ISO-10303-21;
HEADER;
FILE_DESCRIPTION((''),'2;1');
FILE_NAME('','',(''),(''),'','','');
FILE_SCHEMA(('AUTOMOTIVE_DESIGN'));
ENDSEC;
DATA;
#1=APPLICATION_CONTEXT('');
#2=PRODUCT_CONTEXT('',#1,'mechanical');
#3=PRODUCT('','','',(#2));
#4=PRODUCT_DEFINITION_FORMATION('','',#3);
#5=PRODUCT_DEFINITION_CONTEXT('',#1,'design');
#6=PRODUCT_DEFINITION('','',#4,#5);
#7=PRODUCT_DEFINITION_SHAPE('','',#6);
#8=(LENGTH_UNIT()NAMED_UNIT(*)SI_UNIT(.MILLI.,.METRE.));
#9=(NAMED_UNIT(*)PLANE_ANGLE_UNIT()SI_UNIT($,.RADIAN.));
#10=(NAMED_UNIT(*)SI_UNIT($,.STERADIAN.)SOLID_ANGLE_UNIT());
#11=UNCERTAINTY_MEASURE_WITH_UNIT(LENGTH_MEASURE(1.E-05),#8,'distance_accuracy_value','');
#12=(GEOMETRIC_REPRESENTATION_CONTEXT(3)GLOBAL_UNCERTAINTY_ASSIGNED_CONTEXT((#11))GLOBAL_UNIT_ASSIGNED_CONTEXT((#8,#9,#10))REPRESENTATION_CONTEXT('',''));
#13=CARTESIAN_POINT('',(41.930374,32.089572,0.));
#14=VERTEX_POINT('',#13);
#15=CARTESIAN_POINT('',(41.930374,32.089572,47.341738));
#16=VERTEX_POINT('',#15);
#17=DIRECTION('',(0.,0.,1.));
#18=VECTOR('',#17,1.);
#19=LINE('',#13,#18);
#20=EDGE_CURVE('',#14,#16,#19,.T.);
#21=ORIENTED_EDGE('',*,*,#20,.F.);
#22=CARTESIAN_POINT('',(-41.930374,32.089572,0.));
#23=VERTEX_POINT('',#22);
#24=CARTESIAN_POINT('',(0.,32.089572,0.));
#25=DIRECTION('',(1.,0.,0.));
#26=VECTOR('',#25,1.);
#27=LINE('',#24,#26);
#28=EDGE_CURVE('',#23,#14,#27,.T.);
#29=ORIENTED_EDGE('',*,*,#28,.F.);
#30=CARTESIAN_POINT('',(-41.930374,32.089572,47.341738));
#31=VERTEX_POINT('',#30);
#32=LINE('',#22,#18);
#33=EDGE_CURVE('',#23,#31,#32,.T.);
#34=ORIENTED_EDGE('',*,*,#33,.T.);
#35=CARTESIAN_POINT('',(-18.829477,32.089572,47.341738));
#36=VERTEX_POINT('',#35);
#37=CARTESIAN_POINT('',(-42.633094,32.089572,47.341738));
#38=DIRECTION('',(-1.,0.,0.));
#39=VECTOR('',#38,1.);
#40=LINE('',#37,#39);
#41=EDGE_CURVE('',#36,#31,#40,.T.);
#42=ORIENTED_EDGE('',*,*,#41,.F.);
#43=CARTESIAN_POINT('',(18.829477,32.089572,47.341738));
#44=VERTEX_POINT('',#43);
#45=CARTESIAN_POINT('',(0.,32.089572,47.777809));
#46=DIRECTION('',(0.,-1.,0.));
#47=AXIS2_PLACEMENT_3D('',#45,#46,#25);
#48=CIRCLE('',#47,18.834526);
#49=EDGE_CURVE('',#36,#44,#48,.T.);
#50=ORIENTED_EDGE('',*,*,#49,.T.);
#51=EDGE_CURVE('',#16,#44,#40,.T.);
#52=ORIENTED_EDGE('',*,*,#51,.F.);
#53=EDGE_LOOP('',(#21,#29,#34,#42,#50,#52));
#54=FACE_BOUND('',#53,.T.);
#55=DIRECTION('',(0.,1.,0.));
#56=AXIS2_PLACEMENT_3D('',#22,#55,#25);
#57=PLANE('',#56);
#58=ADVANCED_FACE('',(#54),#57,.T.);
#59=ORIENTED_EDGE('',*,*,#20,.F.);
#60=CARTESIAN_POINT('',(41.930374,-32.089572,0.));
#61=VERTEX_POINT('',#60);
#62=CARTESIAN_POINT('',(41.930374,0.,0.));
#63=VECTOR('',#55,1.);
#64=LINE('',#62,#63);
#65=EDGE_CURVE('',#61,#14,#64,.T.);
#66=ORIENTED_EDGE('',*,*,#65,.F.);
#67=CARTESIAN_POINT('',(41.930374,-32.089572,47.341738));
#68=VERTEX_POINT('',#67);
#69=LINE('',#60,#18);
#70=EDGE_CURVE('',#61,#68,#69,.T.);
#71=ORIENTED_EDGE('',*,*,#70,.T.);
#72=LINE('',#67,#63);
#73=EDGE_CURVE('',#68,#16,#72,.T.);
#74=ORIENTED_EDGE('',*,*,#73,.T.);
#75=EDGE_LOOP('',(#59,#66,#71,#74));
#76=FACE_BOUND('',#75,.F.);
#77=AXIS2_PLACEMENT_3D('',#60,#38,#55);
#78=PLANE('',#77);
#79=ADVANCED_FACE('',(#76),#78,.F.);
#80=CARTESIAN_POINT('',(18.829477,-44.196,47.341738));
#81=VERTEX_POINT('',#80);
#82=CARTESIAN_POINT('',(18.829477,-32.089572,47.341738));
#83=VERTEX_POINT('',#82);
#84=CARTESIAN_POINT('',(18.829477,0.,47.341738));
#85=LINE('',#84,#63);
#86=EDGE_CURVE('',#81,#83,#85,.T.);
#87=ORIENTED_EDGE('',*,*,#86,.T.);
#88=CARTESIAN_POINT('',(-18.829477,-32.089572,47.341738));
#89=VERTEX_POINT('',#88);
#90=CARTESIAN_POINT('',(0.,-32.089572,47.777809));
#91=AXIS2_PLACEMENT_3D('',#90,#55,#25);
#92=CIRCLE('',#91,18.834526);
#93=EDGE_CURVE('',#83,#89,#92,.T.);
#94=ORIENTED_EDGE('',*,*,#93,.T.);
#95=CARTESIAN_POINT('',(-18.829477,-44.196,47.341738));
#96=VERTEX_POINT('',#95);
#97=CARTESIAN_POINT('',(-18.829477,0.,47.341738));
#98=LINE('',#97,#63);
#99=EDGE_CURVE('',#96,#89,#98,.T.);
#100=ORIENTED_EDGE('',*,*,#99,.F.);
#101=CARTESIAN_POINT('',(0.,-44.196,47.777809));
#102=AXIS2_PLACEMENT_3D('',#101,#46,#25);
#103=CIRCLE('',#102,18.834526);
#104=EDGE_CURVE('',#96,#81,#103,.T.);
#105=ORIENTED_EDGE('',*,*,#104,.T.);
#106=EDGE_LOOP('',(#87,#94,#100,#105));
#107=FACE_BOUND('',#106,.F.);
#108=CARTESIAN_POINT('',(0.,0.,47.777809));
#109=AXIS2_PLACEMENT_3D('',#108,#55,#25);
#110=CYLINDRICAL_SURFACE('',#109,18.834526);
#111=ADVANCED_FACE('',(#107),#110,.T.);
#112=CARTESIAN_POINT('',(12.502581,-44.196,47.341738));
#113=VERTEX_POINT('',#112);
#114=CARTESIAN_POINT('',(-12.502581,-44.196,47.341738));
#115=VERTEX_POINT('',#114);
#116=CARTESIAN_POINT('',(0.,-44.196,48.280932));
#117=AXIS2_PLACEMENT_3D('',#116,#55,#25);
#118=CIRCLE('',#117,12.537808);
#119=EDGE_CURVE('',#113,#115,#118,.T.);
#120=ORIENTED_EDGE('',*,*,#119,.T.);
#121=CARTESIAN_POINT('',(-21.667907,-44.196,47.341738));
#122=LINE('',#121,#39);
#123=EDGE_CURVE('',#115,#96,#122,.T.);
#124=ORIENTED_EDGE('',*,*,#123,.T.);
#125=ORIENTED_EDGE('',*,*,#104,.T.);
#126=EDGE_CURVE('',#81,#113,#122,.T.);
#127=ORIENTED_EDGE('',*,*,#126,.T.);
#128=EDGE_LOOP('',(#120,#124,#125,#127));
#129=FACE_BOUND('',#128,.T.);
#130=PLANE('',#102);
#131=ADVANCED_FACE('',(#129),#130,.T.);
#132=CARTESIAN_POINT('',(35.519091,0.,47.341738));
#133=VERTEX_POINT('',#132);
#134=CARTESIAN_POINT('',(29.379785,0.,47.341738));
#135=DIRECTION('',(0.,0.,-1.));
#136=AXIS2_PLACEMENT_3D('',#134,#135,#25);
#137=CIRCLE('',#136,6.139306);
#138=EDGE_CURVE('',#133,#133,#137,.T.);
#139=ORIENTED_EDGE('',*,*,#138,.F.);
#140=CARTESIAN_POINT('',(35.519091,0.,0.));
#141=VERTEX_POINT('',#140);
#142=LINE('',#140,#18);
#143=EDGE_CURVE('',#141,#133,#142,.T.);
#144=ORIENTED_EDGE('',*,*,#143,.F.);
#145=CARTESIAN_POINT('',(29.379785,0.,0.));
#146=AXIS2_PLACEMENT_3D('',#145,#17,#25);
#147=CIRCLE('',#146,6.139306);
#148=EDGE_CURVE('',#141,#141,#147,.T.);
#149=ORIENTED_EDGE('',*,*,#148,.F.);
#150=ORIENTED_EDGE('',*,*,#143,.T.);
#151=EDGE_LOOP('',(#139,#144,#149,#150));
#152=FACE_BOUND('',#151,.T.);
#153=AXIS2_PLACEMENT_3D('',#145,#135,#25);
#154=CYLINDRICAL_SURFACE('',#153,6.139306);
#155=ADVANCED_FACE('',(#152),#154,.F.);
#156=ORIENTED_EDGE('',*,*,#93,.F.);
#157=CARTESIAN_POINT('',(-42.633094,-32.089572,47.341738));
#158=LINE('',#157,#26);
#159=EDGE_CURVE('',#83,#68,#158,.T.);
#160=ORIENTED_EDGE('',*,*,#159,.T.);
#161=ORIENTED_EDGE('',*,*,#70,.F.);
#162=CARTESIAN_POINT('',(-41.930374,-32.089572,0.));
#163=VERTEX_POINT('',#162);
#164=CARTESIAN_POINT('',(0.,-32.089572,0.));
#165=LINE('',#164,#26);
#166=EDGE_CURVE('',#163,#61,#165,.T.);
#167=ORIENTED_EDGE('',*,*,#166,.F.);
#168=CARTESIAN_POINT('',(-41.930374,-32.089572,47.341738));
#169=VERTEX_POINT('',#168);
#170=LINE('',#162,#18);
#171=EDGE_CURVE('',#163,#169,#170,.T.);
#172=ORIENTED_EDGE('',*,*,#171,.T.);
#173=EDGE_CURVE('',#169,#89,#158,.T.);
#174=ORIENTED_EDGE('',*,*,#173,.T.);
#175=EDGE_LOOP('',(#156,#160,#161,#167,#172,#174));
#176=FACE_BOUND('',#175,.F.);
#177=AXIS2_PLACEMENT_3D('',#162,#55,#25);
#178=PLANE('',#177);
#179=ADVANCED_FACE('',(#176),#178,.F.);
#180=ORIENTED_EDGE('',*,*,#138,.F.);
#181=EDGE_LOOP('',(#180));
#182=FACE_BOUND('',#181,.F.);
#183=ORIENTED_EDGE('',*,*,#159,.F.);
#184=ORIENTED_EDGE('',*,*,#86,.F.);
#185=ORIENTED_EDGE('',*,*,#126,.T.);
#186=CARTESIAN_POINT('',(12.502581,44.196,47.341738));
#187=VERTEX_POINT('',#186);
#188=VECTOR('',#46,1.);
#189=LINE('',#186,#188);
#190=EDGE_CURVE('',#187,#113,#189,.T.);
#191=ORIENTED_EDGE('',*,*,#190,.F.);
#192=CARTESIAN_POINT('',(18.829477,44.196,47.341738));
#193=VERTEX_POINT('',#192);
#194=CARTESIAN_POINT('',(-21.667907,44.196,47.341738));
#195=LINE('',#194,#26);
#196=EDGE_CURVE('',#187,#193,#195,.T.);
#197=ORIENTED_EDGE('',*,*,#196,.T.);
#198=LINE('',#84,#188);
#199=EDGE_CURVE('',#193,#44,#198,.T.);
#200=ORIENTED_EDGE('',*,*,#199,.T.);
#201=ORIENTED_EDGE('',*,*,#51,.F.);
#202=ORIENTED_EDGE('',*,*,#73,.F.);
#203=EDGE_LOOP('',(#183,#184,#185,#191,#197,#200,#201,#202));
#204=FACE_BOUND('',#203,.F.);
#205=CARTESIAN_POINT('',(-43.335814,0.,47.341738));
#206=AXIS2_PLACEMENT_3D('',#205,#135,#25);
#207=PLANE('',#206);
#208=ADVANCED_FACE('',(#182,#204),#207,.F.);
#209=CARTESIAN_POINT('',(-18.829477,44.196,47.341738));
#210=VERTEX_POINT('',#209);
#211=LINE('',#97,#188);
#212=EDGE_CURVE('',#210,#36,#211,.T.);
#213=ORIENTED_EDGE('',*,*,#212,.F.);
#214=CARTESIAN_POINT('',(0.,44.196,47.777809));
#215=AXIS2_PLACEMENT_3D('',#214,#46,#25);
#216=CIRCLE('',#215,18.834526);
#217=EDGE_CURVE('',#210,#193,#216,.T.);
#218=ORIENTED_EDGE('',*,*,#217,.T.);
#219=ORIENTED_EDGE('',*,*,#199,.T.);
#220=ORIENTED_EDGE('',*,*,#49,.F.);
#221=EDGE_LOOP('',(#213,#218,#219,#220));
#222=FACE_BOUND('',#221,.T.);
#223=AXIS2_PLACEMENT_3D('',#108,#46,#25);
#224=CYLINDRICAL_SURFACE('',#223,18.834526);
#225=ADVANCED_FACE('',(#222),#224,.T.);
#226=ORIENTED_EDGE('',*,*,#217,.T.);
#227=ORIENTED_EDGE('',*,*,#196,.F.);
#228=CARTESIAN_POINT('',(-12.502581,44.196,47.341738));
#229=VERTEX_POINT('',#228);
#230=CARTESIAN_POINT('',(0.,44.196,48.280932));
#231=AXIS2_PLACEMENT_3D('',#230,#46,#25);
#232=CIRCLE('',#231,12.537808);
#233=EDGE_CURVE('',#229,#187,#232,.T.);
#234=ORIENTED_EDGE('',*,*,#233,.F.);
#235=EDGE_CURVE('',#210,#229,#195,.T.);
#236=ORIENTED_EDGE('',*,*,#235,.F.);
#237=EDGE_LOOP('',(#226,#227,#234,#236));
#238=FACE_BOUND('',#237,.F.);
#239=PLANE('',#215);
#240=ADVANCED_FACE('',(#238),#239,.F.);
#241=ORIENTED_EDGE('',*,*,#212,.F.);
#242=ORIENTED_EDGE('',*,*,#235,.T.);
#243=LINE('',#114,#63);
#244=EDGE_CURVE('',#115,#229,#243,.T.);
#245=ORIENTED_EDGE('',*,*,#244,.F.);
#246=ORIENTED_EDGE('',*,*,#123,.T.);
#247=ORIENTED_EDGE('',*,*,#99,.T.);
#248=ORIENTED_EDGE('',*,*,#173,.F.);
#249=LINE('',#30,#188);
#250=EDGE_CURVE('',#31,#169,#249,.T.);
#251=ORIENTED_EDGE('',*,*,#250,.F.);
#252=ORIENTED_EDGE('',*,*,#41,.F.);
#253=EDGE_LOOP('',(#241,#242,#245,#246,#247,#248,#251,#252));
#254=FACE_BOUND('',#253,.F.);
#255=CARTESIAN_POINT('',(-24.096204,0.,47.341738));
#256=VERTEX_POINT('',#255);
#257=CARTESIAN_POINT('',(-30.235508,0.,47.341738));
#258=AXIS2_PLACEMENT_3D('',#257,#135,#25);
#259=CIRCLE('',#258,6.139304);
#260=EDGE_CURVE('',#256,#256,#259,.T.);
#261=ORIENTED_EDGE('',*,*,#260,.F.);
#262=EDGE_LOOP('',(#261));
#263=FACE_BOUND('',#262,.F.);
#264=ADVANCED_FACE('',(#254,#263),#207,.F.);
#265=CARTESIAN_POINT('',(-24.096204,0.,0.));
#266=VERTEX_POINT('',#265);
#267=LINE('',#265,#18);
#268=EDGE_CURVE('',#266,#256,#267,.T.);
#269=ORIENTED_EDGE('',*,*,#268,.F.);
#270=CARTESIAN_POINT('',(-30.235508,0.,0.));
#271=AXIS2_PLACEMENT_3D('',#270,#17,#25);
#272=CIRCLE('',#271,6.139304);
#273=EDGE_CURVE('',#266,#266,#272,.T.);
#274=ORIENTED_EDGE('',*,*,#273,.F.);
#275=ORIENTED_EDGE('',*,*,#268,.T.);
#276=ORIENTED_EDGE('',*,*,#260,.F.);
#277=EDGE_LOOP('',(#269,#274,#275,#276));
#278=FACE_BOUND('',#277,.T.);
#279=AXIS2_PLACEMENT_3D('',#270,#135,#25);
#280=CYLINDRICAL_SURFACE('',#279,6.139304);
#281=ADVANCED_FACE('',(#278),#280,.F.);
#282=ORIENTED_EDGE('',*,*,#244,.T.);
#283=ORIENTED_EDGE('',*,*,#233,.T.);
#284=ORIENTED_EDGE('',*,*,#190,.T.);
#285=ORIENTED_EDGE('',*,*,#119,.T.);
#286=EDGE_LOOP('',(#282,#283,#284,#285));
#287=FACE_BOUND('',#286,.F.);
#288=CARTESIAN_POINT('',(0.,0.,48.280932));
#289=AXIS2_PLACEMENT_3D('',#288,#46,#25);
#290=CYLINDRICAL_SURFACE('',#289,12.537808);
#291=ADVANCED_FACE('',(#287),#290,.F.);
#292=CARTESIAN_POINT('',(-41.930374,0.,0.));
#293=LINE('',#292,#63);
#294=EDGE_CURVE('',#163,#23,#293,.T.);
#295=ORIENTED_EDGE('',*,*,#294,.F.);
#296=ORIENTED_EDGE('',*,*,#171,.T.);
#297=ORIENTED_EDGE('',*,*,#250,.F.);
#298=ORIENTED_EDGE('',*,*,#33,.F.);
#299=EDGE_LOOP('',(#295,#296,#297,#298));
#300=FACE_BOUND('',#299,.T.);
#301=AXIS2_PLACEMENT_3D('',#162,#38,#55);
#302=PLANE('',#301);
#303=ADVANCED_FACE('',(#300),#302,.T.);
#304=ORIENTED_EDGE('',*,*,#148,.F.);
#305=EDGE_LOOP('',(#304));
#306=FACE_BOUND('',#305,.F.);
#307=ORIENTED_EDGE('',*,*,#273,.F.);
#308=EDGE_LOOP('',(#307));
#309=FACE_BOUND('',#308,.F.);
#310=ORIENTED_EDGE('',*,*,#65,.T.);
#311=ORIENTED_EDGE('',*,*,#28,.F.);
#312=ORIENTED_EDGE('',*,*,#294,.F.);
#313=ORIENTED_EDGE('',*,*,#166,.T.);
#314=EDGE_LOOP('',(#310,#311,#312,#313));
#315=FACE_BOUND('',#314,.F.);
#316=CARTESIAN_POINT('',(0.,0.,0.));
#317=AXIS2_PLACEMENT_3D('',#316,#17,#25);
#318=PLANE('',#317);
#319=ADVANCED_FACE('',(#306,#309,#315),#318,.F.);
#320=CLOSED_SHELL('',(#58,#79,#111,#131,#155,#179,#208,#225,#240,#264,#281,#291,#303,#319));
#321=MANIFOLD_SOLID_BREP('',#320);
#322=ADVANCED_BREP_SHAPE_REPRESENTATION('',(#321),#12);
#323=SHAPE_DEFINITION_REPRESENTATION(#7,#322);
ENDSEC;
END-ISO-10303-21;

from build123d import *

# Parameters (mm, degrees)
F0_W          = 83.8607475162
F0_H          = 64.1791447997
F1_DEPTH      = 48.26
F2_R          = 18.8345255186
F3_DEPTH      = 44.196
F3_DEPTH_BACK = 44.196
F4_R          = 12.5378078108
F5_DEPTH      = 44.197
F5_DEPTH_BACK = 44.197
F7_DEPTH      = 44.197
F7_DEPTH_BACK = 44.197
F8_R          = 6.1393043091
F8_R_2        = 6.139306213
F9_DEPTH      = 154
F9_DEPTH_BACK = 47.3427378962


# Not quite as in the source:
# - an extrude ends at something that could not be found from the text; its depth is read off the source's solid


with BuildPart() as f1:
    # F0 (on Top) → F1 (new body)
    with BuildSketch(Plane.XY):
        Rectangle(F0_W, F0_H)
    extrude(amount=F1_DEPTH)

    # F2 (on Front) → F3 (join, two sides)
    with BuildSketch(Plane.XZ) as f3_sk:
        with Locations((0, 47.7778092027)):
            Circle(F2_R)
    extrude(amount=F3_DEPTH)
    extrude(f3_sk.sketch, amount=-F3_DEPTH_BACK)

    # F4 (on Front) → F5 (cut, two sides)
    with BuildSketch(Plane.XZ) as f5_sk:
        with Locations((0, 48.2809320092)):
            Circle(F4_R)
    extrude(amount=-F5_DEPTH, mode=Mode.SUBTRACT)
    extrude(f5_sk.sketch, amount=F5_DEPTH_BACK, mode=Mode.SUBTRACT)

    # F6 (on Front) → F7 (cut, two sides)
    with BuildSketch(Plane.XZ) as f7_sk:
        Polygon((-43.335814029, 47.3417378962), (42.9494790733, 47.3417378962), (48.3834594488, 70.2134892344), (-43.335814029, 70.2134892344), align=None)
    extrude(amount=-F7_DEPTH, mode=Mode.SUBTRACT)
    extrude(f7_sk.sketch, amount=F7_DEPTH_BACK, mode=Mode.SUBTRACT)

    # F8 (on Top) → F9 (cut, two sides)
    with BuildSketch(Plane.XY) as f9_sk:
        with Locations((-30.2355084568, 0)):
            Circle(F8_R)
        with Locations((29.3797850609, 0)):
            Circle(F8_R_2)
    extrude(amount=-F9_DEPTH, mode=Mode.SUBTRACT)
    extrude(f9_sk.sketch, amount=F9_DEPTH_BACK, mode=Mode.SUBTRACT)


solid = f1.part
